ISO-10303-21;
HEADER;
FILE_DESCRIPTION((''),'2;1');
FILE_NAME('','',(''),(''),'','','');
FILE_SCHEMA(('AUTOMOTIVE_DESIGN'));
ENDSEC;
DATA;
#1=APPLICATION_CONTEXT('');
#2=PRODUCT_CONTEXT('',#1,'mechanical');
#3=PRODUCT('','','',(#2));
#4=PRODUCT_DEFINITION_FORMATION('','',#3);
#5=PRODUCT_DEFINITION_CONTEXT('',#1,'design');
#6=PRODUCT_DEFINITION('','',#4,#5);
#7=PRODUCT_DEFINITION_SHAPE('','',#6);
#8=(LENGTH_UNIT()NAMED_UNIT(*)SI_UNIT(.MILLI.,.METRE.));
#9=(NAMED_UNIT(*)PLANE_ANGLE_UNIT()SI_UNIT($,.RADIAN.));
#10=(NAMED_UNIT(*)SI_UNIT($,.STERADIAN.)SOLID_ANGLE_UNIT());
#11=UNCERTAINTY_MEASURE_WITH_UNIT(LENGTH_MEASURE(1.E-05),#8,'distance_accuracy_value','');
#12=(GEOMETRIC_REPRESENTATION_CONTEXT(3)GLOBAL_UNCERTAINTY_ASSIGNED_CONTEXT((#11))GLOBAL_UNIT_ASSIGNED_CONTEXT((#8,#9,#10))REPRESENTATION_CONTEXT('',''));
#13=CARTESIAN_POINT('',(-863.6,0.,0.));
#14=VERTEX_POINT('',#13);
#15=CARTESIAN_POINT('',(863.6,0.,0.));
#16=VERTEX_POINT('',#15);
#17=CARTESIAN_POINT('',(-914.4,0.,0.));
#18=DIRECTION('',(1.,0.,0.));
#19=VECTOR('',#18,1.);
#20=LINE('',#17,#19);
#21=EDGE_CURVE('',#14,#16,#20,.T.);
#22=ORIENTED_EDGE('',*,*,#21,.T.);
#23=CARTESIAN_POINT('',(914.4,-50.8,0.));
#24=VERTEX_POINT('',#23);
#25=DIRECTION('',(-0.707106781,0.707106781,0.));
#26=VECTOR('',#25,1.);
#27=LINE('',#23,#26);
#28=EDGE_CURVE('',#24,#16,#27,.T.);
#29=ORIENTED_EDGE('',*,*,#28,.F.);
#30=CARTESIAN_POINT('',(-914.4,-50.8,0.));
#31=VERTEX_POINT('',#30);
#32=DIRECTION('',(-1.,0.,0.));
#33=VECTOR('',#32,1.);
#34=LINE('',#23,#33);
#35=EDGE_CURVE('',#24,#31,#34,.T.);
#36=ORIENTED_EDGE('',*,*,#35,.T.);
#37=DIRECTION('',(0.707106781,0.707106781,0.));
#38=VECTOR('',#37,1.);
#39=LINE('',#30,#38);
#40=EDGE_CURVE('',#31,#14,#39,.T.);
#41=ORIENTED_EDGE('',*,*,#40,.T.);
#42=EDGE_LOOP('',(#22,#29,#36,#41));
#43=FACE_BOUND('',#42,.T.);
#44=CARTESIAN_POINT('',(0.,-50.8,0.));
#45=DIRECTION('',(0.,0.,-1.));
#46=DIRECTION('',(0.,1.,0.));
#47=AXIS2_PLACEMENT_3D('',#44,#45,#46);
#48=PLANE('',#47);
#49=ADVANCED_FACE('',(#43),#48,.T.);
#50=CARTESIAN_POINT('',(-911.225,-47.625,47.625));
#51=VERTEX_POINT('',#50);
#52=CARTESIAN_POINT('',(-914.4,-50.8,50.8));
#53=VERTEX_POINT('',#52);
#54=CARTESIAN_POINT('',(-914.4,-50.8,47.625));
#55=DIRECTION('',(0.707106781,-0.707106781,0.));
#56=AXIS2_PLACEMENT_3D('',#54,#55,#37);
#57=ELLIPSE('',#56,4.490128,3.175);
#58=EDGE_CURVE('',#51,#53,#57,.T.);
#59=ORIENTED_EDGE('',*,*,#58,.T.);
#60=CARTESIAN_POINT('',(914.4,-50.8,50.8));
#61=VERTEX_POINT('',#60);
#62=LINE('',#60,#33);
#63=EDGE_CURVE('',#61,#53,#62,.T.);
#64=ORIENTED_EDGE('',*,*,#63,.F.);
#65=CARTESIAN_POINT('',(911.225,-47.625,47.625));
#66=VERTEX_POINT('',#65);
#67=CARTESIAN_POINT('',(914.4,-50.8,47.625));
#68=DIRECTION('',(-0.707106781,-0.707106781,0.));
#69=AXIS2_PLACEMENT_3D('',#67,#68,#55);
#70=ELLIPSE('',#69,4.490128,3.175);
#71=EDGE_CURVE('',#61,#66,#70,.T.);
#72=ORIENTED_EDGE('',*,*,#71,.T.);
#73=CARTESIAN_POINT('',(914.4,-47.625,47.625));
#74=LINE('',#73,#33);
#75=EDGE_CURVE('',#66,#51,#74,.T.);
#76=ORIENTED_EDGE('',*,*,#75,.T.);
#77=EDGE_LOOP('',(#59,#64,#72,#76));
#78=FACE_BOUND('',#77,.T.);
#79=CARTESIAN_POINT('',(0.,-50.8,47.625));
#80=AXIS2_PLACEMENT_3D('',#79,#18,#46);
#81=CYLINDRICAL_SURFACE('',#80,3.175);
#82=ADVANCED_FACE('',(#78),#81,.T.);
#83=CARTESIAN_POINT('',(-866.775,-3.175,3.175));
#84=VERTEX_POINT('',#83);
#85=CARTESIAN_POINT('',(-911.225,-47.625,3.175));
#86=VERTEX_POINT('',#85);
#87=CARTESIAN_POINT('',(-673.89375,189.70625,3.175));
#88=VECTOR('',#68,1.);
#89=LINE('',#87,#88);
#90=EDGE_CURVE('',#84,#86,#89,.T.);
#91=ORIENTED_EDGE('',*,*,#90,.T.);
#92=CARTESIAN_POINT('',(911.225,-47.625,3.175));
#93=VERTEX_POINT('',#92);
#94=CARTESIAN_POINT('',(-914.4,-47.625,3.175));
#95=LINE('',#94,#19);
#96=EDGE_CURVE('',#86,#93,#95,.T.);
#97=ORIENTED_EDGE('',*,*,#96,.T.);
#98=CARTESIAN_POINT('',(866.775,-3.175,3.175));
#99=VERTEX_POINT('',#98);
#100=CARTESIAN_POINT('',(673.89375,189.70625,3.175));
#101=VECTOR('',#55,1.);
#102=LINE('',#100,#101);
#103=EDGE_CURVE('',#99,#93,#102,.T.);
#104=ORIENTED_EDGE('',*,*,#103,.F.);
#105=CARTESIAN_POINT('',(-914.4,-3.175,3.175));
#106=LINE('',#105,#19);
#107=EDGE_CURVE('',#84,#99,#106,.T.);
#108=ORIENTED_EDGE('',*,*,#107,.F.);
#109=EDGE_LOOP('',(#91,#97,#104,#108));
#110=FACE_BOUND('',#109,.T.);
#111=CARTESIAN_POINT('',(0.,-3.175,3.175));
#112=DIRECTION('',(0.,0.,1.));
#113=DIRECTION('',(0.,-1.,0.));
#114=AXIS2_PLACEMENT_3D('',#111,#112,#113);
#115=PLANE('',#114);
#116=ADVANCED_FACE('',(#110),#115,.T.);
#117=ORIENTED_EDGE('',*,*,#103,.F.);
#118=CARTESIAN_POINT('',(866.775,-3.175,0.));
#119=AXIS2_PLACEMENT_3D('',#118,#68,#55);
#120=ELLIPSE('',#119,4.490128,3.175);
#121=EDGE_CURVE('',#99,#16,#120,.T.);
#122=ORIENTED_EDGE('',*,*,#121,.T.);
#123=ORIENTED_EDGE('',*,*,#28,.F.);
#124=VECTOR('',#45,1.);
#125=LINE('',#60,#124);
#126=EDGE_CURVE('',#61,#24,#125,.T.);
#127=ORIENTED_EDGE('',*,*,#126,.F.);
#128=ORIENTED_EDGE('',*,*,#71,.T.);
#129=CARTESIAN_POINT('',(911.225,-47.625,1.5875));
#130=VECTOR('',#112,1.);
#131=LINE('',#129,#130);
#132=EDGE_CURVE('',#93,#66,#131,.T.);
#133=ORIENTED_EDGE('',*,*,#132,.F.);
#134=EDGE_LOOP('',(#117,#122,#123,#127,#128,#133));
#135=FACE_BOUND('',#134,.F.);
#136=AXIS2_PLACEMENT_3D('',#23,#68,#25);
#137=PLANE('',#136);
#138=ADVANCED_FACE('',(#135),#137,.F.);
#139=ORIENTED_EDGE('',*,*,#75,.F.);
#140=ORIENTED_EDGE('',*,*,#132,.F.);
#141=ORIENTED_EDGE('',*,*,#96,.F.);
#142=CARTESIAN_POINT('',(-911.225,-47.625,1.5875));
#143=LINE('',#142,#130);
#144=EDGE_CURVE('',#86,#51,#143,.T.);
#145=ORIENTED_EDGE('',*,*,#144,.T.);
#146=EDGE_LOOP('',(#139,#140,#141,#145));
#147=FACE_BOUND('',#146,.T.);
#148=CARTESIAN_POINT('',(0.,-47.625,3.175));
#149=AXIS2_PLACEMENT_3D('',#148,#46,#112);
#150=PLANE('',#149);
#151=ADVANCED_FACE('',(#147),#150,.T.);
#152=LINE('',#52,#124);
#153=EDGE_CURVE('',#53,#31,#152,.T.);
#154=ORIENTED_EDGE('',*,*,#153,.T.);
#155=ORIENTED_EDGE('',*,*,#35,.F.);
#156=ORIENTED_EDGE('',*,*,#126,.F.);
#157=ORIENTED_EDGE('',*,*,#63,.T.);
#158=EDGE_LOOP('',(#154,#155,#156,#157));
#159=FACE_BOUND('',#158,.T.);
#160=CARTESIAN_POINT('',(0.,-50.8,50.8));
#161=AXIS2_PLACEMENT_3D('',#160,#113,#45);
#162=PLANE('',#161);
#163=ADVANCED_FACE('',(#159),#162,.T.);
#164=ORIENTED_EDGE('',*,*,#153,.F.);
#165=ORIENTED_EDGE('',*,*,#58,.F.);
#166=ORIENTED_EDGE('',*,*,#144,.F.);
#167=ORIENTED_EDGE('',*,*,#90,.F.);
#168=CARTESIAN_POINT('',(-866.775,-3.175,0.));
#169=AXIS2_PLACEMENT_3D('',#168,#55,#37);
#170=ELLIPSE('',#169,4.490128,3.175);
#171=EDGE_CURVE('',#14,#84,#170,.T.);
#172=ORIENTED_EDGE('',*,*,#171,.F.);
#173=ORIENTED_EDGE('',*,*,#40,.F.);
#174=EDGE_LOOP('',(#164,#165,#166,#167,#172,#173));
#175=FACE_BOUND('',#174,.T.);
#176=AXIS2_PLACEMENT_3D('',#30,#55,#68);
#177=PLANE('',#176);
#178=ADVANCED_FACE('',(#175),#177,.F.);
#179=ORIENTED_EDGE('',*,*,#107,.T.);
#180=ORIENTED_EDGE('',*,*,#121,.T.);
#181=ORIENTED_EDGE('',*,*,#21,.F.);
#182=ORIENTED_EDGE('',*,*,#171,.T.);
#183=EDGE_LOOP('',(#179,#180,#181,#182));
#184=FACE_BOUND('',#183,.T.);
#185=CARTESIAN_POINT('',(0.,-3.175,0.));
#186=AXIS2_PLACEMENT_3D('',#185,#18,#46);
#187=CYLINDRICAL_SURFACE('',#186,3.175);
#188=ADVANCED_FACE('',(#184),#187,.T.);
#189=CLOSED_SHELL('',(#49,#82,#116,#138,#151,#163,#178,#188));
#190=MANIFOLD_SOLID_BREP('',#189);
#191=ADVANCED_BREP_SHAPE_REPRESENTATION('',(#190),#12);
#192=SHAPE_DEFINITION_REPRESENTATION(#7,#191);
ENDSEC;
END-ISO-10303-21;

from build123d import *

# Parameters (mm, degrees)
F1_DEPTH = 914.4
F3_DEPTH = 76.2


# Not quite as in the source:
# - a pattern or mirror of a feature is missing from the dataset's text; its kind, count and spacing are read off the source's solid


with BuildPart() as f1:
    # F0 (on Right) → F1 (new body, symmetric)
    with BuildSketch(Plane.YZ):
        with BuildLine():
            Line((-50.8, 0), (0, 0))
            ThreePointArc((0, 0), (-0.9299359697, 2.2450640303), (-3.175, 3.175))
            Line((-3.175, 3.175), (-47.625, 3.175))
            Line((-47.625, 3.175), (-47.625, 47.625))
            ThreePointArc((-47.625, 47.625), (-48.5549359697, 49.8700640303), (-50.8, 50.8))
            Line((-50.8, 50.8), (-50.8, 0))
        make_face()
    extrude(amount=F1_DEPTH, both=True)

    # F2 (on face) → F3 (cut)
    with BuildSketch(Plane(origin=(0, 0, 0), x_dir=(1, 0, 0), z_dir=(0, 0, -1))):
        Polygon((914.4, 50.8), (863.6, 0), (914.4, 0), align=None)
    f3 = extrude(amount=-F3_DEPTH, mode=Mode.SUBTRACT)

    # F3_copies: F3 across plane
    add(f3.mirror(Plane(origin=(0, 0, 0), x_dir=(0, 0, -1), z_dir=(-1, 0, 0))), mode=Mode.SUBTRACT)


solid = f1.part
